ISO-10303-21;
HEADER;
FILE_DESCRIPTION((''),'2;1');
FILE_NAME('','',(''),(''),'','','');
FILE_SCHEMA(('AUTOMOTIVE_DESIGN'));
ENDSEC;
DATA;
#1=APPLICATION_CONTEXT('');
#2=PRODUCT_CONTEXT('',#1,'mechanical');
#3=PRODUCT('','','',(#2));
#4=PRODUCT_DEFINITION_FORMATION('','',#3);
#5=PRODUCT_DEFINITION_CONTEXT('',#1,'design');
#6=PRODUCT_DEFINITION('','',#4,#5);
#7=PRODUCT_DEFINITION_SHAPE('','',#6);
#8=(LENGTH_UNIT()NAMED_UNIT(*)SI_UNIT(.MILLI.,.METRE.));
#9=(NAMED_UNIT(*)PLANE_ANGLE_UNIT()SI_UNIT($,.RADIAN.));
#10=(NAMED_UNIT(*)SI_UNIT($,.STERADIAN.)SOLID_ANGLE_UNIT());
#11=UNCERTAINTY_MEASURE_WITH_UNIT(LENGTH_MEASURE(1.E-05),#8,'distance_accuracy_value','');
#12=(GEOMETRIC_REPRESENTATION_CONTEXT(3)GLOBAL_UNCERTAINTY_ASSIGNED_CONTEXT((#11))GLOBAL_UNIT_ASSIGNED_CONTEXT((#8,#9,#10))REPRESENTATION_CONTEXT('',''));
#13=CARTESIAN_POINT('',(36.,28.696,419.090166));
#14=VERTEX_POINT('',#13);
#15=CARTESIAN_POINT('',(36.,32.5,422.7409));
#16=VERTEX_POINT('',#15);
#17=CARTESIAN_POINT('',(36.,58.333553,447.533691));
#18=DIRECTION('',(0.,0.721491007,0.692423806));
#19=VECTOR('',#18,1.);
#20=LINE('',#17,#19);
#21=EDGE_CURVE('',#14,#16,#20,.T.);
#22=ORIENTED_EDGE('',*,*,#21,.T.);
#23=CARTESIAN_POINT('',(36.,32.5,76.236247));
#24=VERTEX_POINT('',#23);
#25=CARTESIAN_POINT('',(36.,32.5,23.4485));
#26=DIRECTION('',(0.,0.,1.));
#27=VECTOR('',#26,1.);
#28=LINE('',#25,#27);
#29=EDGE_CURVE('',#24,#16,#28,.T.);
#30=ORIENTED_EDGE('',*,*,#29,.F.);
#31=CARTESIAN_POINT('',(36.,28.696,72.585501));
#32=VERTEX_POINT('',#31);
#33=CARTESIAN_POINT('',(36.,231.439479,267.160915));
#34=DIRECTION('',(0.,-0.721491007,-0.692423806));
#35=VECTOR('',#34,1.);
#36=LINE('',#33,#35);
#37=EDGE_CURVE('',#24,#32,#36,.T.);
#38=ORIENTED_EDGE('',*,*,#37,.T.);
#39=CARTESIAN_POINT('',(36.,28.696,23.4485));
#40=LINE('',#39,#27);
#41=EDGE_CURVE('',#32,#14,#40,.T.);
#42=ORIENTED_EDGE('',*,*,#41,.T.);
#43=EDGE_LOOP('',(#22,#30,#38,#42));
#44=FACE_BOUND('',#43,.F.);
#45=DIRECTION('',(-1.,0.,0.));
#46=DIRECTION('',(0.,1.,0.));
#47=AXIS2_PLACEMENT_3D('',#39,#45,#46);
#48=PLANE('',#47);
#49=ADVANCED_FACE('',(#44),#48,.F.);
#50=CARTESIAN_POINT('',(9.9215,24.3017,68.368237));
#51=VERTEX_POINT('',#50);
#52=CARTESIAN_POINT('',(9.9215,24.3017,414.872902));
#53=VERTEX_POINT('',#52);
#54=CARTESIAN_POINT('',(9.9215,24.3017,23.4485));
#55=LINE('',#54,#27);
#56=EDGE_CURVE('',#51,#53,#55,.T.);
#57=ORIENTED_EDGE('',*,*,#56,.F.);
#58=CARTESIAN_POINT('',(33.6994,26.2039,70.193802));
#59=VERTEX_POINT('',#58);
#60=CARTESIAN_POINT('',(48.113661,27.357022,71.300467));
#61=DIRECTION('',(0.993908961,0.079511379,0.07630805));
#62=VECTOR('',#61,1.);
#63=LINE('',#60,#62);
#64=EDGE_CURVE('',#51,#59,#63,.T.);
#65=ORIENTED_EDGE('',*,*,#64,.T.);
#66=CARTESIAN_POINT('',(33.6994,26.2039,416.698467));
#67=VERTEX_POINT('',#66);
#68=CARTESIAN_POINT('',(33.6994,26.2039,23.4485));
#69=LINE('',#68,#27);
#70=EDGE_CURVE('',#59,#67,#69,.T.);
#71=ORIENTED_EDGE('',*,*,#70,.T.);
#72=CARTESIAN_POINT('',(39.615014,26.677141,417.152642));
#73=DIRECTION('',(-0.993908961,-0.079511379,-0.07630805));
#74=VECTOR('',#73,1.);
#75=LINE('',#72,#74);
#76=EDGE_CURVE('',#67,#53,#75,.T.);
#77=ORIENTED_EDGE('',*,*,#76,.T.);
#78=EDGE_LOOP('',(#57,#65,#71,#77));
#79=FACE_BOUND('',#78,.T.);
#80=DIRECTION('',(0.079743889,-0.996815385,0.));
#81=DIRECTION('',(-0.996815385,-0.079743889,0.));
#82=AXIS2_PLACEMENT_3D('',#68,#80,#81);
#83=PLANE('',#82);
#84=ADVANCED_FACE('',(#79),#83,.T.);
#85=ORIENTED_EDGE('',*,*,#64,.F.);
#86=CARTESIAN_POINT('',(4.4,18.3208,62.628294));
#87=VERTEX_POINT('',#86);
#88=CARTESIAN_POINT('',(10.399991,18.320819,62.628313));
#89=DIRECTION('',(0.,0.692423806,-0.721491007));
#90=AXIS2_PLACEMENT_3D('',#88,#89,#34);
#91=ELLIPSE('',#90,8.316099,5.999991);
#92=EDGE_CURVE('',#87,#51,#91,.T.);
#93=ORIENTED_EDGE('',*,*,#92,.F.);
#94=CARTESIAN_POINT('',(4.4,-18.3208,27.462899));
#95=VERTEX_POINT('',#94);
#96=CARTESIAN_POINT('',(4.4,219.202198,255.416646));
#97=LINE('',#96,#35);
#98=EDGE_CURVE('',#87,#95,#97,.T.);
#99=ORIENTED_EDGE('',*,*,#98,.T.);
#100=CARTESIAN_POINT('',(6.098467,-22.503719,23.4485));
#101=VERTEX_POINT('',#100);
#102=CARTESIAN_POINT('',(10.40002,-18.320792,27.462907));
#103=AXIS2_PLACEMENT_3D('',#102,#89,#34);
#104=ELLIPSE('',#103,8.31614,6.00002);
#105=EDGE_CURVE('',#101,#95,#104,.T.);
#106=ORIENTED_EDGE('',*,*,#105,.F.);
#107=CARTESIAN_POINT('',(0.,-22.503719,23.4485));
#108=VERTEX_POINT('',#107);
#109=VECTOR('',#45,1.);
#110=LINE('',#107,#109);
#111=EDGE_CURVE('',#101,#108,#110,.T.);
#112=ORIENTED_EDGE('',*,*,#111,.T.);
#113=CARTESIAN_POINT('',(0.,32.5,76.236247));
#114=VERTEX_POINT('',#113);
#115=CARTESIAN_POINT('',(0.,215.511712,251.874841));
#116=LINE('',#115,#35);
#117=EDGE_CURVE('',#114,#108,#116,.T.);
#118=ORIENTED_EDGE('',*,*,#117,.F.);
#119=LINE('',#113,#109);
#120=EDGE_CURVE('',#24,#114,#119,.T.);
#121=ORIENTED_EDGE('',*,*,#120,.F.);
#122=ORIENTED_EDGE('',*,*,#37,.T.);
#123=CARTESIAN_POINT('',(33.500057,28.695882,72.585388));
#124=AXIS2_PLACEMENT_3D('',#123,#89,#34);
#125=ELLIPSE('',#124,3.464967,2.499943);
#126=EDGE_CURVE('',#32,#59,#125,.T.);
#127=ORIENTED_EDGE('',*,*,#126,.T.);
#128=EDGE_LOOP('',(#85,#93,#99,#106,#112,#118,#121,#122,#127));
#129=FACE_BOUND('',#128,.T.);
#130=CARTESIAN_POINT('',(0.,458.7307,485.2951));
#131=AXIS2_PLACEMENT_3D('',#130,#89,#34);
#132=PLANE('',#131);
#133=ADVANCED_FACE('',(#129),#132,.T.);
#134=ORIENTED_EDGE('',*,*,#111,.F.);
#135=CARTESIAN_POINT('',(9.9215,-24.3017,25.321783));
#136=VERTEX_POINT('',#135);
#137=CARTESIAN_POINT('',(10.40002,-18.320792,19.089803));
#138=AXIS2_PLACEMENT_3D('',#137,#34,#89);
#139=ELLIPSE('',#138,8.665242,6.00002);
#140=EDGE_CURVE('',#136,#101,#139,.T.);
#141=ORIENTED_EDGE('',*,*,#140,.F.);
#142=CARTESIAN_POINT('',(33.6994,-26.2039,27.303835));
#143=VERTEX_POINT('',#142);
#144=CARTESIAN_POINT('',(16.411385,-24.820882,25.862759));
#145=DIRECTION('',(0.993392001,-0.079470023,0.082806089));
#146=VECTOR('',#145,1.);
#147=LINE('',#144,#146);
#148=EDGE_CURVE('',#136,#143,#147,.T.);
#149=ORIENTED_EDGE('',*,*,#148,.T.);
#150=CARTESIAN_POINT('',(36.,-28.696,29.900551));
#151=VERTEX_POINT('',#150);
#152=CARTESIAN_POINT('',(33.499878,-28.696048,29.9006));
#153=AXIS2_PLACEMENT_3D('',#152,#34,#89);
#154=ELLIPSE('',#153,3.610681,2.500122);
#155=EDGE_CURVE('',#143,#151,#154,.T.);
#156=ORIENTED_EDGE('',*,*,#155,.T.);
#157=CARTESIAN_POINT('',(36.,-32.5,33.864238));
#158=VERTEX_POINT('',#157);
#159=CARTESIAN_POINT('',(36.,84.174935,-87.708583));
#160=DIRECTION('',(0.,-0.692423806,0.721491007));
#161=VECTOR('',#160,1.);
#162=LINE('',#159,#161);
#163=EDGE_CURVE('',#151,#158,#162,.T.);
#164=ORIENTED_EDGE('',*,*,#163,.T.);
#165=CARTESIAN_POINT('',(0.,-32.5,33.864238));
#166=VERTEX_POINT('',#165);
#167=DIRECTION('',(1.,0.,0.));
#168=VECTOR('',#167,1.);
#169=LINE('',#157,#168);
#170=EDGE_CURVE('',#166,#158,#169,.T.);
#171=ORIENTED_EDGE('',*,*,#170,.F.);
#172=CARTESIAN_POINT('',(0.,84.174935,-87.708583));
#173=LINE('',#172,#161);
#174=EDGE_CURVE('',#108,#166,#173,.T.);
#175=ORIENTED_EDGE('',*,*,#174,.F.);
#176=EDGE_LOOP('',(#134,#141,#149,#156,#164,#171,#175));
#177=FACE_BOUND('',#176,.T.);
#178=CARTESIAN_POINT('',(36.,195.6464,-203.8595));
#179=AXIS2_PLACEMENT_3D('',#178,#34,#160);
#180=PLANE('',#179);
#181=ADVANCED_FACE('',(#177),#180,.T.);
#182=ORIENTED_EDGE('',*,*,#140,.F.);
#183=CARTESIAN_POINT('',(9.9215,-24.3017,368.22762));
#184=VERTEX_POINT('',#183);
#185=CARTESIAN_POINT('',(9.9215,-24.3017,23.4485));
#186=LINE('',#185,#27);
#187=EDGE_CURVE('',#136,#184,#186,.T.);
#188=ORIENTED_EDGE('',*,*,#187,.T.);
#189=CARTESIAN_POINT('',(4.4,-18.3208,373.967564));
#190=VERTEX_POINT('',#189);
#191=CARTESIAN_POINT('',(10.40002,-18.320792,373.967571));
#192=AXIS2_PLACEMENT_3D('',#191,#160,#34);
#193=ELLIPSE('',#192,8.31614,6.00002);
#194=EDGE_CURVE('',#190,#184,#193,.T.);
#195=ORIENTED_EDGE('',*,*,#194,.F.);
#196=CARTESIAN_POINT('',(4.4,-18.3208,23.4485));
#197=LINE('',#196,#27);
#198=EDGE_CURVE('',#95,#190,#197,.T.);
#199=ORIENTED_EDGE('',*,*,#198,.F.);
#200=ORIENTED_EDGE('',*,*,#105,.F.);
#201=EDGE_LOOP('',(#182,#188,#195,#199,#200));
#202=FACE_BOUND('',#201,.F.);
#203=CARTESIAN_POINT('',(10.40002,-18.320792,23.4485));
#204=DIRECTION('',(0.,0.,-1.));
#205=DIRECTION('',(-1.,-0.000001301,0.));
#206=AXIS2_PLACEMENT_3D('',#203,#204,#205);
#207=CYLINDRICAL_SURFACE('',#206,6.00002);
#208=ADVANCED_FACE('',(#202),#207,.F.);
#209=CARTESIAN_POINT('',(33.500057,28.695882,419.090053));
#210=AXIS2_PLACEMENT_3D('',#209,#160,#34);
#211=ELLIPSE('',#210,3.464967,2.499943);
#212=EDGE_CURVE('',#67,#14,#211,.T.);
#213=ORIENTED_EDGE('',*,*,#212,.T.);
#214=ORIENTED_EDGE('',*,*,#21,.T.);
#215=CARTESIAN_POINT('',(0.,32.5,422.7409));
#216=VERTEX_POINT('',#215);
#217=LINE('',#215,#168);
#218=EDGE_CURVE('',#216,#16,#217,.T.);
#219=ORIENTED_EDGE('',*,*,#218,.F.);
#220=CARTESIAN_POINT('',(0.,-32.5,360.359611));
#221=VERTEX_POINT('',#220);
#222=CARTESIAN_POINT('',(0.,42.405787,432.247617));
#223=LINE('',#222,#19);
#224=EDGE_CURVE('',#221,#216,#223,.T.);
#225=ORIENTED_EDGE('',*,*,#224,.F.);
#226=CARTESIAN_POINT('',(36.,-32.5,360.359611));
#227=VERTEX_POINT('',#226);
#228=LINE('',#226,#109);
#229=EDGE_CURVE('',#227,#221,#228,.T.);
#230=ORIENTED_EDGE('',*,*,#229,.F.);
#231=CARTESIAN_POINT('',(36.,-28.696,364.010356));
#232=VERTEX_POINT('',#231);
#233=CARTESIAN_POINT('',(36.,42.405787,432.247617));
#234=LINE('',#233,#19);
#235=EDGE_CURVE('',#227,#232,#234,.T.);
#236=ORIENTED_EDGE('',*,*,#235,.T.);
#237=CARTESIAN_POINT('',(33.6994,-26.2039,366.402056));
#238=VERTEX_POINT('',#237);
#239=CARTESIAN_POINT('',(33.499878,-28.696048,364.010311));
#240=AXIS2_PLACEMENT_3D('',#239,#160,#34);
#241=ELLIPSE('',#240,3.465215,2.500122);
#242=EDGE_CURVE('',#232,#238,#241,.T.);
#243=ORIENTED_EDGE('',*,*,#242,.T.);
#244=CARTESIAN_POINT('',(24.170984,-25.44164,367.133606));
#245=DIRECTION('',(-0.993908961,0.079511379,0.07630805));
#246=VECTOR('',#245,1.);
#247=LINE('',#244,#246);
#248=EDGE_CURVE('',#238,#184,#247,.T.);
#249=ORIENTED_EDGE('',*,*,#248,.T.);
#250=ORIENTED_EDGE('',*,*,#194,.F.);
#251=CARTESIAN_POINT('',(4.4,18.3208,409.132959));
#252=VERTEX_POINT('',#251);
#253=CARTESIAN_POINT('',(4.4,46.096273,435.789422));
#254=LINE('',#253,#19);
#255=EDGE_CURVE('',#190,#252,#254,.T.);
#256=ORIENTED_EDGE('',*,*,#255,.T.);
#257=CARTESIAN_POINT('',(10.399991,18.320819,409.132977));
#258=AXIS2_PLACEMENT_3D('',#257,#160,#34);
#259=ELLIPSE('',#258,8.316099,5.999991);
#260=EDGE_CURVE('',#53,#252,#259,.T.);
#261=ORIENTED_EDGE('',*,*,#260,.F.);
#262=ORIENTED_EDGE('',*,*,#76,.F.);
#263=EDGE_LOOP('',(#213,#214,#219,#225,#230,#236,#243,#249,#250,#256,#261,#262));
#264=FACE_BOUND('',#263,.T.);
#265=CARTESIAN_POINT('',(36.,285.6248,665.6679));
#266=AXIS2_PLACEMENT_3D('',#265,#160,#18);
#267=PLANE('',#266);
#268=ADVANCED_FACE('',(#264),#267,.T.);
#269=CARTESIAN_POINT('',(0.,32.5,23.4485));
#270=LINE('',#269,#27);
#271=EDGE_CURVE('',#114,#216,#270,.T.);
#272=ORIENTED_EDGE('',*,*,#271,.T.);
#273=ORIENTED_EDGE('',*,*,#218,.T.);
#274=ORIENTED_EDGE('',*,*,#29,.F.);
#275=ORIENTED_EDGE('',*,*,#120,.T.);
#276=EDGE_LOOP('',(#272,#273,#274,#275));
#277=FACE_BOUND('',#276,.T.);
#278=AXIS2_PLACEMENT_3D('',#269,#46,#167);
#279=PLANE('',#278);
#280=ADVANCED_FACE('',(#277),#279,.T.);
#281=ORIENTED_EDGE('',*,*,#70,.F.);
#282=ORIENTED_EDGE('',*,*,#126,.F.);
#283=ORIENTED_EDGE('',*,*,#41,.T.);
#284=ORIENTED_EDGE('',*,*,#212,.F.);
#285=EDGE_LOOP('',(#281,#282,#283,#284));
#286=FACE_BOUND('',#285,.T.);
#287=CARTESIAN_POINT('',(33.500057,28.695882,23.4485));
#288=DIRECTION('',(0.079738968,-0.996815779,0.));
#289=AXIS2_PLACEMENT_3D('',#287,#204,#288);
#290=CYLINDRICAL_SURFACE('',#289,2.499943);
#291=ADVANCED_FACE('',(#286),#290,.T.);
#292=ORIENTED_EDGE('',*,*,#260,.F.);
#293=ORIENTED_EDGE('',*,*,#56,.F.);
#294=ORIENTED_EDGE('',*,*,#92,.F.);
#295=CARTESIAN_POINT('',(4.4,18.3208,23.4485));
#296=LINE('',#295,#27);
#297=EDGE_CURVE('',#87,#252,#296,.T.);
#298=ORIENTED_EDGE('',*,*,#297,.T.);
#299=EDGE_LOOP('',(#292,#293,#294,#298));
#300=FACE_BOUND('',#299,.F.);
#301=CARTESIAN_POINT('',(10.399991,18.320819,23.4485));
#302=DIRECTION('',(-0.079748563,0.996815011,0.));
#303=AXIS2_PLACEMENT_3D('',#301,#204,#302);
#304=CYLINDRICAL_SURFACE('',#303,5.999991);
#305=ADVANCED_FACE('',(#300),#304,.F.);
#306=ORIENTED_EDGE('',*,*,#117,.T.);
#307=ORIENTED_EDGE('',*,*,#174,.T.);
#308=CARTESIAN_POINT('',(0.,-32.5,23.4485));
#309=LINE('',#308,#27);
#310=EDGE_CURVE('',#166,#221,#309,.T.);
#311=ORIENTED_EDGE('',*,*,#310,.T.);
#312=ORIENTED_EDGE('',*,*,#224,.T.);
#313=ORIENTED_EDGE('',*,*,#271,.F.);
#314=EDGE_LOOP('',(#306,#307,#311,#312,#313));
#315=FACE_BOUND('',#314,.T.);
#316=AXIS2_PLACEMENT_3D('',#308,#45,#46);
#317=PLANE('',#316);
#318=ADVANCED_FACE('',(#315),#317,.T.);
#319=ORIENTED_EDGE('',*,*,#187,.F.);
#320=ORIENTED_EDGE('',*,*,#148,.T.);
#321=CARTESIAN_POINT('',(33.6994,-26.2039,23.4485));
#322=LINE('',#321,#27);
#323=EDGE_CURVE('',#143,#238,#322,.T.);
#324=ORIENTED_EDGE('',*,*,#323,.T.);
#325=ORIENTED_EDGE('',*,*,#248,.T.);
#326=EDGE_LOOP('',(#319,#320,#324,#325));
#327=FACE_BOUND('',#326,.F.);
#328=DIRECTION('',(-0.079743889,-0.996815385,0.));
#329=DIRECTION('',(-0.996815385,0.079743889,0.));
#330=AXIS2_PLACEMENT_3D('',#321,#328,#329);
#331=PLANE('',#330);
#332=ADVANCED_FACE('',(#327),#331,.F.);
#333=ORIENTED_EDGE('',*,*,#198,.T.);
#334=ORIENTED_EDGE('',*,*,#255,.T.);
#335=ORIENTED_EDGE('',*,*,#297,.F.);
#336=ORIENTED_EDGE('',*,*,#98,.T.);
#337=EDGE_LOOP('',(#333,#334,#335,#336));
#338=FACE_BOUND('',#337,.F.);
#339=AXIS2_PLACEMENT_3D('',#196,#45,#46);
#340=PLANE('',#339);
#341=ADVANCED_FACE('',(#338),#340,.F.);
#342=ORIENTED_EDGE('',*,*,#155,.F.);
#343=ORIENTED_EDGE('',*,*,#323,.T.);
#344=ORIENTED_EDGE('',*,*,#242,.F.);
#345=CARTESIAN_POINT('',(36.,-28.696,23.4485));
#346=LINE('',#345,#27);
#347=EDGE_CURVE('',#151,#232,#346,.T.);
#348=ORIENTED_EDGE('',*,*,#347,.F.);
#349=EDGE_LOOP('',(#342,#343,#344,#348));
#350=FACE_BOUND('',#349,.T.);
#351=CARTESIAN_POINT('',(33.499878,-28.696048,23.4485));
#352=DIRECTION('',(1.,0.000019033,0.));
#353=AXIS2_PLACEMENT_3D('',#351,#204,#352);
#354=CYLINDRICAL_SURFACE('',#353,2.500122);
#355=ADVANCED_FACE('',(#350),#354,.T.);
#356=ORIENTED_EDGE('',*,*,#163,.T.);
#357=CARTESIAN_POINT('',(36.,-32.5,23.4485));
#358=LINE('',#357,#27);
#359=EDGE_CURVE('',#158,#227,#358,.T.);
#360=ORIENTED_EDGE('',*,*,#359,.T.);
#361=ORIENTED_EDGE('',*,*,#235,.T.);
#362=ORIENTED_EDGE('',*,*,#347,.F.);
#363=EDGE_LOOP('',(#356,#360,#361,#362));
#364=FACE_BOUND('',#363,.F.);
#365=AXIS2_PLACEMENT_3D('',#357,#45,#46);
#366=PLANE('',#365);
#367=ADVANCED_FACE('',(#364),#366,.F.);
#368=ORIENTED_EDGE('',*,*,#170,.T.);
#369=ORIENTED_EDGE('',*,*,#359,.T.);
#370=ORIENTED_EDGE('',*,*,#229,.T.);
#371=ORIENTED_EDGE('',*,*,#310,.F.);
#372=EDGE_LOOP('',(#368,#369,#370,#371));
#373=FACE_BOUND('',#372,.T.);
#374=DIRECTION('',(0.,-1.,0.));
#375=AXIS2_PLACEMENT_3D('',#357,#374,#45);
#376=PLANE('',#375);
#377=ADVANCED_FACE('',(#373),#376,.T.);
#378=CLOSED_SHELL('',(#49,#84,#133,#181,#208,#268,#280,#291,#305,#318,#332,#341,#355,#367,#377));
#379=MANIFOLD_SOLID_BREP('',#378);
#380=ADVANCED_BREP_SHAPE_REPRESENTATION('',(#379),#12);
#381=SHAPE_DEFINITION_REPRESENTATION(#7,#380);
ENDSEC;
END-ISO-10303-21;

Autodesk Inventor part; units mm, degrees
ref_plane "Начальная плоскость" through (0, 0, 23.4485) normal (0, 0, 1) x (1, 0, 0)
ref_plane "Конечная плоскость" through (0, 0, 422.7409) normal (0, 0, 1) x (1, 0, 0)
sketch "Эскиз" plane through (0, 0, 0) normal (0, 0, 1) x (1, 0, 0)
  line L0 (36, -32.5) -> (0, -32.5)
  line L1 (36, -32.5) -> (36, -28.696)
  line L2 (33.6994, -26.2039) -> (9.9215, -24.3017)
  line L3 (4.4, -18.3208) -> (4.4, 18.3208)
  line L4 (33.6994, 26.2039) -> (9.9215, 24.3017)
  line L5 (36, 28.696) -> (36, 32.5)
  line L6 (0, 32.5) -> (36, 32.5)
  line L7 (0, -32.5) -> (0, 32.5)
  arc A0 (4.4, -18.3208) -> (9.9215, -24.3017) centre (10.4, -18.3208) ccw
  arc A1 (9.9215, 24.3017) -> (4.4, 18.3208) centre (10.4, 18.3208) ccw
  arc A2 (36, -28.696) -> (33.6994, -26.2039) centre (33.5, -28.696) ccw
  arc A3 (33.6994, 26.2039) -> (36, 28.696) centre (33.5, 28.696) ccw
  line L8 (0, 45.5) -> (0, -45.5) construction
  line L9 (-7.2974, 0) -> (43.7847, 0) construction
  point P0 (36, -26.388)
  point P1 (4.4, -23.86)
  point P2 (4.4, 23.86)
  point P3 (36, 26.388)
  dimension "d3" = 36
  dimension "d5" = 4.4
  dimension "d7" = 65
  dimension "d9" = 8.64
  dimension "d11" = 8.64
  dimension "d13" = 6.112
  dimension "d15" = 6.112
  dimension "d22" = 6
  dimension "d23" = 2.5
  dimension "d24" = 32.5
  dimension "d25" = 0
extrude "Тело" add sketch "Эскиз" along normal up to surface (399.2924 mm away) from surface at 23.4485
sketch "Sketch3" plane through (0, 0, 0) normal (0, 0, 1) x (1, 0, 0)
  line L0 (0, 0) -> (10, 0)
ref_plane "Work Plane7" through (0, 0, 0) normal (0, -1, 0) x (1, 0, 0)
sketch "Sketch4" plane through (0, 0, 0) normal (0, -1, 0) x (1, 0, 0)
  line L0 (-2, 23.4485) -> (12, 23.4485)
  line L1 (-2, 422.7409) -> (12, 422.7409)
  dimension "d29" = 399.2924
ref_plane "РабПлоскость8" through (36, 285.6248, 665.6679) normal (0, -0.6924238, 0.721491) x (1, 0, 0)
split "Разделение1" plane through (36, 285.6248, 665.6679) removes the side toward (0, -0.6924238, 0.721491)
ref_plane "РабПлоскость9" through (0, 458.7307, 485.2951) normal (0, 0.6924238, -0.721491) x (1, 0, 0)
split "Разделение2" plane through (0, 458.7307, 485.2951) removes the side toward (0, 0.6924238, -0.721491)
ref_plane "РабПлоскость10" through (36, 195.6464, -203.8595) normal (0, -0.721491, -0.6924238) x (1, 0, 0)
split "Разделение3" plane through (36, 195.6464, -203.8595) removes the side toward (0, -0.721491, -0.6924238)
equation "\"d3\" = b"
equation "\"d5\" = t1"
equation "\"d7\" = ParH"
equation "\"d9\" = msp_x1 + t2"
equation "\"d11\" = msp_x1 + t2"
equation "\"d13\" = -msp_x2 + t2"
equation "\"d15\" = -msp_x2 + t2"
equation "\"d22\" = R"
equation "\"d23\" = R1"
equation "\"d24\" = 0.5 * d7"
equation "\"d16\" = G_L"
equation "\"R1\" = 2.5"
equation "\"R\" = 6"
equation "\"t1\" = 4.4"
equation "\"t2\" = 7.2"
equation "\"ParH\" = 65"
equation "\"b\" = 36"
equation "\"msp_x1\" = 0.04 * b"
equation "\"msp_x2\" = -0.08 * t1 + 0.04 * b"
equation "\"G_L\" = d29"
equation "\"ex\" = 0"
equation "\"G_OFFSET_START\" = -23.44846"
equation "\"G_OFFSET_END\" = -58.90056"
equation "\"d26\" = -G_OFFSET_START"
equation "\"d27\" = G_OFFSET_END + B_L"
equation "\"B_L\" = 481.64146"
properties part number "Швеллер 6.5U-399,29 ГОСТ 8240-97" material "Сталь, мягкая"
